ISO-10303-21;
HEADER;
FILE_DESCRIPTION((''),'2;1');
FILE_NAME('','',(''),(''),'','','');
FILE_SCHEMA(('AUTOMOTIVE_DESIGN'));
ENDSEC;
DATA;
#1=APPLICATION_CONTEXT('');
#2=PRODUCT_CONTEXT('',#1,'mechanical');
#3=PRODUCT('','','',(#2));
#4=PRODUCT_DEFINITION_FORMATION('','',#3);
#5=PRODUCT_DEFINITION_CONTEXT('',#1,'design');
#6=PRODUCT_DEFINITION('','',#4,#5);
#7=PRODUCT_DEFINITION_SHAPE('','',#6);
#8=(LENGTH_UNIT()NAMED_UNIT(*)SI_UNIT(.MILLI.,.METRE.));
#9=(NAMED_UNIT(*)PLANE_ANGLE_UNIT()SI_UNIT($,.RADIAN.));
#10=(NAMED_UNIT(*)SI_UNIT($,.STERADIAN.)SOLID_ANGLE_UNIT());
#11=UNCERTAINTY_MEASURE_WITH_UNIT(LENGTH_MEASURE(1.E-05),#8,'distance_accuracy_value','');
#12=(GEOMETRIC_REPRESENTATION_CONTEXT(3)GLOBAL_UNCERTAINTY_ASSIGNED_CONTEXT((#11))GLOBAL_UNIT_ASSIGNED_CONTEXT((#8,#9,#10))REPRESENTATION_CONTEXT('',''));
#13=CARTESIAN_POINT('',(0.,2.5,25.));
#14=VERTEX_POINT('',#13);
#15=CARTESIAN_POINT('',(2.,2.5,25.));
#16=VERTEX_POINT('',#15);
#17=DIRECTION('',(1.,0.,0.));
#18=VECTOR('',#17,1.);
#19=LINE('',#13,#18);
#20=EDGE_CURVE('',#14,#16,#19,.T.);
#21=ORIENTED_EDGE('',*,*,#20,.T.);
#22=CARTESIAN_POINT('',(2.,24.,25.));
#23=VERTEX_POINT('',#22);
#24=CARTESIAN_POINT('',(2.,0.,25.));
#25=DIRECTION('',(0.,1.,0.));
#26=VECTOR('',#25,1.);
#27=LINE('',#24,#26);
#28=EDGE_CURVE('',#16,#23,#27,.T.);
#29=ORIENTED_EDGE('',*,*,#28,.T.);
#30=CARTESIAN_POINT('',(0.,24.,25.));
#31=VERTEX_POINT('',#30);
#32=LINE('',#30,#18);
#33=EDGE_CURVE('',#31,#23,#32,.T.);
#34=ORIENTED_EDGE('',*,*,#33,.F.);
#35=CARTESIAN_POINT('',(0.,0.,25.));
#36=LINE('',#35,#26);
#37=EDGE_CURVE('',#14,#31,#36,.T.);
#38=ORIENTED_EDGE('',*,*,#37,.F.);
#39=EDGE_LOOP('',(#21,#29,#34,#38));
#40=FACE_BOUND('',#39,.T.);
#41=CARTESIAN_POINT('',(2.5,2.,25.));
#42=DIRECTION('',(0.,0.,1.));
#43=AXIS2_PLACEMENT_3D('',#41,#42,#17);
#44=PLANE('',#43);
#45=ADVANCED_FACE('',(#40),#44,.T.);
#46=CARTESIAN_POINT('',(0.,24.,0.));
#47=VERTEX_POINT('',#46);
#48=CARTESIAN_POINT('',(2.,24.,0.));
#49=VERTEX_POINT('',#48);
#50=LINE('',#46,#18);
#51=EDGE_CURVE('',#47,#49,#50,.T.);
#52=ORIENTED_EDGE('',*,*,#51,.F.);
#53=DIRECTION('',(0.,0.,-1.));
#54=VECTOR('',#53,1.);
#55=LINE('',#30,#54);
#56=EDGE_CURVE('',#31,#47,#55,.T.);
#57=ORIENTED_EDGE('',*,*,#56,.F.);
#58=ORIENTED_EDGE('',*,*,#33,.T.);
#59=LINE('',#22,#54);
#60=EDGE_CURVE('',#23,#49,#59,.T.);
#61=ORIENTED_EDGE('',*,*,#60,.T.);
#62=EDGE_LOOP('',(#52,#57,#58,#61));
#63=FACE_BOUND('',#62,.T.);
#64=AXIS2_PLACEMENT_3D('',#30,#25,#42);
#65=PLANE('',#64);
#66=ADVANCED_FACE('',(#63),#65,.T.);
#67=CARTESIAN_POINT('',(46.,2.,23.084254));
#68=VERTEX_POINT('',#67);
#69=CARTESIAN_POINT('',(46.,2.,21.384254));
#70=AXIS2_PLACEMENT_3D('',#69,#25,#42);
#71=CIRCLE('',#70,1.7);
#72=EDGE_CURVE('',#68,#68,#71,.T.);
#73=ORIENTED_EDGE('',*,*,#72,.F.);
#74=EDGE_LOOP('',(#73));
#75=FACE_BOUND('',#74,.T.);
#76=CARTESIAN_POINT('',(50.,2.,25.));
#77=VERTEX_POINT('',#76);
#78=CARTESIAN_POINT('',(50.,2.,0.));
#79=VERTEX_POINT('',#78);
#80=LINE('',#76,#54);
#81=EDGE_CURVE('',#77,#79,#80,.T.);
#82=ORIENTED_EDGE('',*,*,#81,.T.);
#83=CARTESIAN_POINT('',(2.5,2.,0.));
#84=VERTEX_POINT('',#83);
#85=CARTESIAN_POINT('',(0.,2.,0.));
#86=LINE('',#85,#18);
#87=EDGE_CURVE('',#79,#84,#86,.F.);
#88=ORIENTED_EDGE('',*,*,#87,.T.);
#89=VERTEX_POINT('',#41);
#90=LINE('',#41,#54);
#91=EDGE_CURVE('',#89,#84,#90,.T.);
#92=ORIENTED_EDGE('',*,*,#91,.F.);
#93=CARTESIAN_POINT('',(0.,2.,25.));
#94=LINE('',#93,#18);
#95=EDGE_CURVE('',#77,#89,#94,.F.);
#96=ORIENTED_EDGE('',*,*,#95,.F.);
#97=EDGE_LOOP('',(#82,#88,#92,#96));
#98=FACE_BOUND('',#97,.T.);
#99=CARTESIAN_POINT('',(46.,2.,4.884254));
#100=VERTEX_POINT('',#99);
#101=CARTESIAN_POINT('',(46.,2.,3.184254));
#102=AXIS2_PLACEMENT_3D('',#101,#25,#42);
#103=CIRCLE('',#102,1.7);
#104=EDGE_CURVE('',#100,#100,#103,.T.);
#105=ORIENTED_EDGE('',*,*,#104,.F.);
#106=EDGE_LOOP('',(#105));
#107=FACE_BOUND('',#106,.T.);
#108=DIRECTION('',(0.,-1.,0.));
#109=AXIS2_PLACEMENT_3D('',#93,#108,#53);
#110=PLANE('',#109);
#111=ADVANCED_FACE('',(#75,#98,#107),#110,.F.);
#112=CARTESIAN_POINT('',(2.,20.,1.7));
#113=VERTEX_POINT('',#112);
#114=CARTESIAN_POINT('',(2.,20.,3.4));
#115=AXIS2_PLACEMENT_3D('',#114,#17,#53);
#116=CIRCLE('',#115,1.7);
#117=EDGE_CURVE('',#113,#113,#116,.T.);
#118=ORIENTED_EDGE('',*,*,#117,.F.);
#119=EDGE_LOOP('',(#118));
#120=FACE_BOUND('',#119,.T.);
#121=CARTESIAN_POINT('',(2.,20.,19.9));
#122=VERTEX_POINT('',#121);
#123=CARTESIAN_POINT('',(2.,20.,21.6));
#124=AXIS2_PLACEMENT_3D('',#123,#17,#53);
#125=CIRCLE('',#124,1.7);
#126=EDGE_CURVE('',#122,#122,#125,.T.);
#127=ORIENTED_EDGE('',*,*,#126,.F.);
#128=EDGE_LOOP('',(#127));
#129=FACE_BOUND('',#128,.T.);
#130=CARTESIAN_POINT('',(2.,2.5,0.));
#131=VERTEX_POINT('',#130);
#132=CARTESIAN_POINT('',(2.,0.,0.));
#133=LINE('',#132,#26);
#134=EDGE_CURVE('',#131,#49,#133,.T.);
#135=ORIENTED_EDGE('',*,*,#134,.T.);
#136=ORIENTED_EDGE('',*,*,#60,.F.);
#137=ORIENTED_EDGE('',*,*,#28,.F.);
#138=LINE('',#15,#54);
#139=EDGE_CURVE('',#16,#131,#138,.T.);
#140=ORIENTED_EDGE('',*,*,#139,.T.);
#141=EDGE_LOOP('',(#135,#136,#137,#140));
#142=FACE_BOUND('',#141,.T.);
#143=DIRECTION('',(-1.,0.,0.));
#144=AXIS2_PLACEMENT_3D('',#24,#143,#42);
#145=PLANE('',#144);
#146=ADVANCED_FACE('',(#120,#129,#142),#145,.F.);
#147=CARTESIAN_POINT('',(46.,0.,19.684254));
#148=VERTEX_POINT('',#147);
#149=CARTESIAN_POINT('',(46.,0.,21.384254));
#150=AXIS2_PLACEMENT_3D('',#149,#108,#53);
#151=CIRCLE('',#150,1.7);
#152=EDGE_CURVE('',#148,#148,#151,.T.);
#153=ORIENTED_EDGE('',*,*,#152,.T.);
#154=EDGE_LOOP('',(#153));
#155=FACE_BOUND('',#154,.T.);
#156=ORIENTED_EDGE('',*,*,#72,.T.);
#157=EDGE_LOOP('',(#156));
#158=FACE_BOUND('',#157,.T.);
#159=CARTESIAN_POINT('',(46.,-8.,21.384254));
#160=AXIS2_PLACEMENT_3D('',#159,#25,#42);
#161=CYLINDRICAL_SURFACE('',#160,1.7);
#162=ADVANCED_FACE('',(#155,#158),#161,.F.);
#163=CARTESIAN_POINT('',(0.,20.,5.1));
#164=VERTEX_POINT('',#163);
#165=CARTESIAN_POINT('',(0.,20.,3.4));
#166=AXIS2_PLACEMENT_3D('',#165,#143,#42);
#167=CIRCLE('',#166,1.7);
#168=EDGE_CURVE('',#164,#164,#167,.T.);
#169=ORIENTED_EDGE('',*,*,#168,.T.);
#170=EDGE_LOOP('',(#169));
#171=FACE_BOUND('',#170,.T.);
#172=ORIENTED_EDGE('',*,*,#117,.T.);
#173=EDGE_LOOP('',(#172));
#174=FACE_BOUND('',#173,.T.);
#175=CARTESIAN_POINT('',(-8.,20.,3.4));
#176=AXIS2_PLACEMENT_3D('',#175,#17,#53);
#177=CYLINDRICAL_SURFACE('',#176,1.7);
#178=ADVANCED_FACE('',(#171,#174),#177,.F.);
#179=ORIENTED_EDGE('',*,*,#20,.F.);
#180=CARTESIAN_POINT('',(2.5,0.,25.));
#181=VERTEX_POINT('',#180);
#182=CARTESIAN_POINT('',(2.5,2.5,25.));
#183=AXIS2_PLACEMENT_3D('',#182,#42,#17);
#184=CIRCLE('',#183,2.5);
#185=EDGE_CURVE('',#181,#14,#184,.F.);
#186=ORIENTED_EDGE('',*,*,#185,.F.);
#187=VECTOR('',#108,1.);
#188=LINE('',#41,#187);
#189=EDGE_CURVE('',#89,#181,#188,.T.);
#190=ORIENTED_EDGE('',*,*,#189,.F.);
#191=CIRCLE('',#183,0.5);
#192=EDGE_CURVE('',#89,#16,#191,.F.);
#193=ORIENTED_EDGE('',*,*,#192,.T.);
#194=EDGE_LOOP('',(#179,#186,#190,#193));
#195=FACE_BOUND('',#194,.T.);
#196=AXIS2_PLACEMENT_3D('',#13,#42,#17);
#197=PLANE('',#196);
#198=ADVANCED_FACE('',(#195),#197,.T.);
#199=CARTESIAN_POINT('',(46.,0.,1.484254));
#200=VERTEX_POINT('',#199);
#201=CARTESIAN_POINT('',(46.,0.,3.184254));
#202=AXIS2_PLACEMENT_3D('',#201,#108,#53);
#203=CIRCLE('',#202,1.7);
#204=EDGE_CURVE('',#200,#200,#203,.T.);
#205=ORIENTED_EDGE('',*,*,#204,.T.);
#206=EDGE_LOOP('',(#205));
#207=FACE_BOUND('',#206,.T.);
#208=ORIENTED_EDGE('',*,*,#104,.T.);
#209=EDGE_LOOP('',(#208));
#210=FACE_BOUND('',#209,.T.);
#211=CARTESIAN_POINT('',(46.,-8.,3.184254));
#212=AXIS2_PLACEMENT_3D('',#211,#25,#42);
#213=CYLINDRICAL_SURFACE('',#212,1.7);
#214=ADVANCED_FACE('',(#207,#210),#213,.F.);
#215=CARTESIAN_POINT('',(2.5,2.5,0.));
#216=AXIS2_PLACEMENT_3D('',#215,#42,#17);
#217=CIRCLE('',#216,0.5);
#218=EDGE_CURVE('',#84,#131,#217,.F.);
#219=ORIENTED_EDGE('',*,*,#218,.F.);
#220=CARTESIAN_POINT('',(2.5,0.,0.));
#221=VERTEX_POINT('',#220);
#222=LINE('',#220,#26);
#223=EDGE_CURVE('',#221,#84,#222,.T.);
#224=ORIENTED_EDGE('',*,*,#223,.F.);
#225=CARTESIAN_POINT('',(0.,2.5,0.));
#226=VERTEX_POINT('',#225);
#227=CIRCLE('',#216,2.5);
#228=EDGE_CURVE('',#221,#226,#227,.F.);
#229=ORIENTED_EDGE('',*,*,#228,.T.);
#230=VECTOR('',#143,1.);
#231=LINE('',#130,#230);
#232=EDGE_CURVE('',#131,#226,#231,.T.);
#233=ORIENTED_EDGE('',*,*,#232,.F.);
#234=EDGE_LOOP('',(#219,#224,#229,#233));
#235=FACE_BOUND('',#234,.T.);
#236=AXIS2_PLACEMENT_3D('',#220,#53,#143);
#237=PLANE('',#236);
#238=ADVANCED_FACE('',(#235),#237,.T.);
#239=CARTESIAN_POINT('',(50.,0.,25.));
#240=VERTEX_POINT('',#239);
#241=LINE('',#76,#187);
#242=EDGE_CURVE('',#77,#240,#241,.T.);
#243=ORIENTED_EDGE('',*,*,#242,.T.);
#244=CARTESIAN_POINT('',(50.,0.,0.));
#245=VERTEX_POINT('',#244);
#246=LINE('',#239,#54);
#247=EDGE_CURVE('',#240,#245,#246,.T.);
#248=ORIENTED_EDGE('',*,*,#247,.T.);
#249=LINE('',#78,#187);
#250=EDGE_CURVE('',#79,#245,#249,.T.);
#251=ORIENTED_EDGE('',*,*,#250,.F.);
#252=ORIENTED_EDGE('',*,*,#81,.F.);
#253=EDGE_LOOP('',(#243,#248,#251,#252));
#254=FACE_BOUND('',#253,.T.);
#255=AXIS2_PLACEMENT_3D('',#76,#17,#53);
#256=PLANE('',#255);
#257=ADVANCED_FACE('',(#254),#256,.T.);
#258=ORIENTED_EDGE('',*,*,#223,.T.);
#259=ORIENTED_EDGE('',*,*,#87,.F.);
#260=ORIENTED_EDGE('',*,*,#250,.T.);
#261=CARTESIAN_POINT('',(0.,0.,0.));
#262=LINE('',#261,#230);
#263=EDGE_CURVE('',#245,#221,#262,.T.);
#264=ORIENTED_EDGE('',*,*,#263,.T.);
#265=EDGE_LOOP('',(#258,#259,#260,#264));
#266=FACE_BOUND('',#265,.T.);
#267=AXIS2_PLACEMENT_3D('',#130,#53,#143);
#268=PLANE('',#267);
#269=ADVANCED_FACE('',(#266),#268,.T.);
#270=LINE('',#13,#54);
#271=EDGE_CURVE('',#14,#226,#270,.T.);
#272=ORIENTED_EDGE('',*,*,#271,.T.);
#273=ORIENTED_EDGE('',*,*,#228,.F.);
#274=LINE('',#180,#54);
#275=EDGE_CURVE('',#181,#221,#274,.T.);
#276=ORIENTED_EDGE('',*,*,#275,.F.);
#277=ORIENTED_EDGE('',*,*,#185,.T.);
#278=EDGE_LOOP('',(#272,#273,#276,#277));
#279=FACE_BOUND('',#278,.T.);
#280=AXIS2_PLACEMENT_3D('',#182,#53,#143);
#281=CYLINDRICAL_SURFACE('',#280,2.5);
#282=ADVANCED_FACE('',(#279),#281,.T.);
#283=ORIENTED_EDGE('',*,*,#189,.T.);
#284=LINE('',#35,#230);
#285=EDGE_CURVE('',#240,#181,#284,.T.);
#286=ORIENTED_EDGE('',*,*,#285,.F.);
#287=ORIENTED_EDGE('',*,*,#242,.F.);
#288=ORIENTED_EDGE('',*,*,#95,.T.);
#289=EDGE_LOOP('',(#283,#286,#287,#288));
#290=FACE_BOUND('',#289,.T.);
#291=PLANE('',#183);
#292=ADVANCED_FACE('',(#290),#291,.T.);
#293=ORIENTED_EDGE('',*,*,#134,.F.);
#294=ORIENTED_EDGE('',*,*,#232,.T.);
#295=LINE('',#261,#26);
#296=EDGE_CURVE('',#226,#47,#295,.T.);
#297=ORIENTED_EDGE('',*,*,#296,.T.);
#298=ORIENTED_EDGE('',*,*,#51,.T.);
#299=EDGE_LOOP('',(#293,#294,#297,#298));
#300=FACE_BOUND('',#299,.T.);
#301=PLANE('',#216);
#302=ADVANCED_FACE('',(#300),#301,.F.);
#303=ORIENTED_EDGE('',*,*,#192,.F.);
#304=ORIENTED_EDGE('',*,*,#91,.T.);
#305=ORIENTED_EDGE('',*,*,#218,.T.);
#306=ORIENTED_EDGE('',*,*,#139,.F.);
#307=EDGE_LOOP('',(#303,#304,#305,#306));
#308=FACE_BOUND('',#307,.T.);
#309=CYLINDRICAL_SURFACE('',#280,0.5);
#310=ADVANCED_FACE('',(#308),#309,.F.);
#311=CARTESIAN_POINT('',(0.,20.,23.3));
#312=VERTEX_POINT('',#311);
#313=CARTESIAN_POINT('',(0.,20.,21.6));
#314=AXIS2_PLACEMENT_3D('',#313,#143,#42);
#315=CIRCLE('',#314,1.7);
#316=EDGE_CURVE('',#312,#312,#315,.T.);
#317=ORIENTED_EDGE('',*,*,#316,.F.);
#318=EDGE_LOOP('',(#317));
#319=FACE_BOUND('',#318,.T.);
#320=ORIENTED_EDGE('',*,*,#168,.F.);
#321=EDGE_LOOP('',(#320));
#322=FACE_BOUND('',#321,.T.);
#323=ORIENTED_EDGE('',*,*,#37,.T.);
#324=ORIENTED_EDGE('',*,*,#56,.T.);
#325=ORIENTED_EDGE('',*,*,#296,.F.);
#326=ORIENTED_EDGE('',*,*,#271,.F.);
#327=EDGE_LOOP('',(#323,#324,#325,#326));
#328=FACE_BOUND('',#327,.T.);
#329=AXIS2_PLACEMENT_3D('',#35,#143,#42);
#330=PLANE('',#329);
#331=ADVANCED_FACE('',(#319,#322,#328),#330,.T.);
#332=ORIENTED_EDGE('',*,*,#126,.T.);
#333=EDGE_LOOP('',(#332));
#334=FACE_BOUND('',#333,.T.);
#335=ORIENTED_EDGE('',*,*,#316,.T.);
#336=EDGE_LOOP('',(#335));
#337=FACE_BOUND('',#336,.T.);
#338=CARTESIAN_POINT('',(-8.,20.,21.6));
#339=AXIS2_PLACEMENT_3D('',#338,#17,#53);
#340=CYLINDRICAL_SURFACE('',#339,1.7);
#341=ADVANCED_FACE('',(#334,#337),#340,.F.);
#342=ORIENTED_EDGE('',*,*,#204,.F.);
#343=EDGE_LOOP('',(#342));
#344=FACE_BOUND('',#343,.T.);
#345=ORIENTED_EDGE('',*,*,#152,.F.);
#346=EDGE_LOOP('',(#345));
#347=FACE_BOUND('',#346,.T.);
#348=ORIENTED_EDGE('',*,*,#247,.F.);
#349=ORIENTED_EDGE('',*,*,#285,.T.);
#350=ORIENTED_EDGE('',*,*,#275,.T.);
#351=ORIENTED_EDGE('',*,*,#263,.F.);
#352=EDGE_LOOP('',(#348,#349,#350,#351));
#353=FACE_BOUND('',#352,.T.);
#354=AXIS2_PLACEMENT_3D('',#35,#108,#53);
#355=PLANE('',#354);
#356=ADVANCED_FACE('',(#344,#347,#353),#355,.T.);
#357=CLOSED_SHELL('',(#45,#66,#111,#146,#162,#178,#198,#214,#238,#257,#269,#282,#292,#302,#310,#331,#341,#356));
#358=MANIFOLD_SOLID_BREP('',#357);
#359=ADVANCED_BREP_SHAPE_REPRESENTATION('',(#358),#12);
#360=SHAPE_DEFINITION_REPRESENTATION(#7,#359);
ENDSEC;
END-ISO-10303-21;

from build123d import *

# Parameters (mm, degrees)
SM_BASE_FLANGE_1_DEPTH = 25
SKETCH_6_R             = 1.7
CUT_EXTRUDE_1_DEPTH    = 10
SKETCH_7_R             = 1.7
CUT_EXTRUDE_2_DEPTH    = 10


# Sheet-metal steps are written as plain solids
with BuildPart() as part:
    # Sketch 1 → 基体-法兰1 (new body)
    with BuildSketch(Plane.XY):
        with BuildLine():
            Line((0, 24), (0, 2.5))
            ThreePointArc((0, 2.5), (0.732233047, 0.732233047), (2.5, 0))
            Line((2.5, 0), (50, 0))
            Line((50, 0), (50, 2))
            Line((50, 2), (2.5, 2))
            ThreePointArc((2.5, 2), (2.146446609, 2.146446609), (2, 2.5))
            Line((2, 2.5), (2, 24))
            Line((2, 24), (0, 24))
        make_face()
    extrude(amount=SM_BASE_FLANGE_1_DEPTH)

    # 草图6 → 切除-拉伸1 (cut)
    with BuildSketch(Plane(origin=(2, 0, 0), x_dir=(0, 0, -1), z_dir=(1, 0, 0))):
        with Locations((-3.4, 20)):
            Circle(SKETCH_6_R)
        with Locations((-21.6, 20)):
            Circle(SKETCH_6_R)
    extrude(amount=-CUT_EXTRUDE_1_DEPTH, mode=Mode.SUBTRACT)

    # 草图7 → 切除-拉伸2 (cut)
    with BuildSketch(Plane(origin=(0, 2, 0), x_dir=(1, 0, 0), z_dir=(0, 1, 0))):
        with Locations(Location((46, -3.184253604, 0), (0, 0, 270))):
            Circle(SKETCH_7_R)
        with Locations(Location((46, -21.384253604, 0), (0, 0, 270))):
            Circle(SKETCH_7_R)
    extrude(amount=-CUT_EXTRUDE_2_DEPTH, mode=Mode.SUBTRACT)


solid = part.part
